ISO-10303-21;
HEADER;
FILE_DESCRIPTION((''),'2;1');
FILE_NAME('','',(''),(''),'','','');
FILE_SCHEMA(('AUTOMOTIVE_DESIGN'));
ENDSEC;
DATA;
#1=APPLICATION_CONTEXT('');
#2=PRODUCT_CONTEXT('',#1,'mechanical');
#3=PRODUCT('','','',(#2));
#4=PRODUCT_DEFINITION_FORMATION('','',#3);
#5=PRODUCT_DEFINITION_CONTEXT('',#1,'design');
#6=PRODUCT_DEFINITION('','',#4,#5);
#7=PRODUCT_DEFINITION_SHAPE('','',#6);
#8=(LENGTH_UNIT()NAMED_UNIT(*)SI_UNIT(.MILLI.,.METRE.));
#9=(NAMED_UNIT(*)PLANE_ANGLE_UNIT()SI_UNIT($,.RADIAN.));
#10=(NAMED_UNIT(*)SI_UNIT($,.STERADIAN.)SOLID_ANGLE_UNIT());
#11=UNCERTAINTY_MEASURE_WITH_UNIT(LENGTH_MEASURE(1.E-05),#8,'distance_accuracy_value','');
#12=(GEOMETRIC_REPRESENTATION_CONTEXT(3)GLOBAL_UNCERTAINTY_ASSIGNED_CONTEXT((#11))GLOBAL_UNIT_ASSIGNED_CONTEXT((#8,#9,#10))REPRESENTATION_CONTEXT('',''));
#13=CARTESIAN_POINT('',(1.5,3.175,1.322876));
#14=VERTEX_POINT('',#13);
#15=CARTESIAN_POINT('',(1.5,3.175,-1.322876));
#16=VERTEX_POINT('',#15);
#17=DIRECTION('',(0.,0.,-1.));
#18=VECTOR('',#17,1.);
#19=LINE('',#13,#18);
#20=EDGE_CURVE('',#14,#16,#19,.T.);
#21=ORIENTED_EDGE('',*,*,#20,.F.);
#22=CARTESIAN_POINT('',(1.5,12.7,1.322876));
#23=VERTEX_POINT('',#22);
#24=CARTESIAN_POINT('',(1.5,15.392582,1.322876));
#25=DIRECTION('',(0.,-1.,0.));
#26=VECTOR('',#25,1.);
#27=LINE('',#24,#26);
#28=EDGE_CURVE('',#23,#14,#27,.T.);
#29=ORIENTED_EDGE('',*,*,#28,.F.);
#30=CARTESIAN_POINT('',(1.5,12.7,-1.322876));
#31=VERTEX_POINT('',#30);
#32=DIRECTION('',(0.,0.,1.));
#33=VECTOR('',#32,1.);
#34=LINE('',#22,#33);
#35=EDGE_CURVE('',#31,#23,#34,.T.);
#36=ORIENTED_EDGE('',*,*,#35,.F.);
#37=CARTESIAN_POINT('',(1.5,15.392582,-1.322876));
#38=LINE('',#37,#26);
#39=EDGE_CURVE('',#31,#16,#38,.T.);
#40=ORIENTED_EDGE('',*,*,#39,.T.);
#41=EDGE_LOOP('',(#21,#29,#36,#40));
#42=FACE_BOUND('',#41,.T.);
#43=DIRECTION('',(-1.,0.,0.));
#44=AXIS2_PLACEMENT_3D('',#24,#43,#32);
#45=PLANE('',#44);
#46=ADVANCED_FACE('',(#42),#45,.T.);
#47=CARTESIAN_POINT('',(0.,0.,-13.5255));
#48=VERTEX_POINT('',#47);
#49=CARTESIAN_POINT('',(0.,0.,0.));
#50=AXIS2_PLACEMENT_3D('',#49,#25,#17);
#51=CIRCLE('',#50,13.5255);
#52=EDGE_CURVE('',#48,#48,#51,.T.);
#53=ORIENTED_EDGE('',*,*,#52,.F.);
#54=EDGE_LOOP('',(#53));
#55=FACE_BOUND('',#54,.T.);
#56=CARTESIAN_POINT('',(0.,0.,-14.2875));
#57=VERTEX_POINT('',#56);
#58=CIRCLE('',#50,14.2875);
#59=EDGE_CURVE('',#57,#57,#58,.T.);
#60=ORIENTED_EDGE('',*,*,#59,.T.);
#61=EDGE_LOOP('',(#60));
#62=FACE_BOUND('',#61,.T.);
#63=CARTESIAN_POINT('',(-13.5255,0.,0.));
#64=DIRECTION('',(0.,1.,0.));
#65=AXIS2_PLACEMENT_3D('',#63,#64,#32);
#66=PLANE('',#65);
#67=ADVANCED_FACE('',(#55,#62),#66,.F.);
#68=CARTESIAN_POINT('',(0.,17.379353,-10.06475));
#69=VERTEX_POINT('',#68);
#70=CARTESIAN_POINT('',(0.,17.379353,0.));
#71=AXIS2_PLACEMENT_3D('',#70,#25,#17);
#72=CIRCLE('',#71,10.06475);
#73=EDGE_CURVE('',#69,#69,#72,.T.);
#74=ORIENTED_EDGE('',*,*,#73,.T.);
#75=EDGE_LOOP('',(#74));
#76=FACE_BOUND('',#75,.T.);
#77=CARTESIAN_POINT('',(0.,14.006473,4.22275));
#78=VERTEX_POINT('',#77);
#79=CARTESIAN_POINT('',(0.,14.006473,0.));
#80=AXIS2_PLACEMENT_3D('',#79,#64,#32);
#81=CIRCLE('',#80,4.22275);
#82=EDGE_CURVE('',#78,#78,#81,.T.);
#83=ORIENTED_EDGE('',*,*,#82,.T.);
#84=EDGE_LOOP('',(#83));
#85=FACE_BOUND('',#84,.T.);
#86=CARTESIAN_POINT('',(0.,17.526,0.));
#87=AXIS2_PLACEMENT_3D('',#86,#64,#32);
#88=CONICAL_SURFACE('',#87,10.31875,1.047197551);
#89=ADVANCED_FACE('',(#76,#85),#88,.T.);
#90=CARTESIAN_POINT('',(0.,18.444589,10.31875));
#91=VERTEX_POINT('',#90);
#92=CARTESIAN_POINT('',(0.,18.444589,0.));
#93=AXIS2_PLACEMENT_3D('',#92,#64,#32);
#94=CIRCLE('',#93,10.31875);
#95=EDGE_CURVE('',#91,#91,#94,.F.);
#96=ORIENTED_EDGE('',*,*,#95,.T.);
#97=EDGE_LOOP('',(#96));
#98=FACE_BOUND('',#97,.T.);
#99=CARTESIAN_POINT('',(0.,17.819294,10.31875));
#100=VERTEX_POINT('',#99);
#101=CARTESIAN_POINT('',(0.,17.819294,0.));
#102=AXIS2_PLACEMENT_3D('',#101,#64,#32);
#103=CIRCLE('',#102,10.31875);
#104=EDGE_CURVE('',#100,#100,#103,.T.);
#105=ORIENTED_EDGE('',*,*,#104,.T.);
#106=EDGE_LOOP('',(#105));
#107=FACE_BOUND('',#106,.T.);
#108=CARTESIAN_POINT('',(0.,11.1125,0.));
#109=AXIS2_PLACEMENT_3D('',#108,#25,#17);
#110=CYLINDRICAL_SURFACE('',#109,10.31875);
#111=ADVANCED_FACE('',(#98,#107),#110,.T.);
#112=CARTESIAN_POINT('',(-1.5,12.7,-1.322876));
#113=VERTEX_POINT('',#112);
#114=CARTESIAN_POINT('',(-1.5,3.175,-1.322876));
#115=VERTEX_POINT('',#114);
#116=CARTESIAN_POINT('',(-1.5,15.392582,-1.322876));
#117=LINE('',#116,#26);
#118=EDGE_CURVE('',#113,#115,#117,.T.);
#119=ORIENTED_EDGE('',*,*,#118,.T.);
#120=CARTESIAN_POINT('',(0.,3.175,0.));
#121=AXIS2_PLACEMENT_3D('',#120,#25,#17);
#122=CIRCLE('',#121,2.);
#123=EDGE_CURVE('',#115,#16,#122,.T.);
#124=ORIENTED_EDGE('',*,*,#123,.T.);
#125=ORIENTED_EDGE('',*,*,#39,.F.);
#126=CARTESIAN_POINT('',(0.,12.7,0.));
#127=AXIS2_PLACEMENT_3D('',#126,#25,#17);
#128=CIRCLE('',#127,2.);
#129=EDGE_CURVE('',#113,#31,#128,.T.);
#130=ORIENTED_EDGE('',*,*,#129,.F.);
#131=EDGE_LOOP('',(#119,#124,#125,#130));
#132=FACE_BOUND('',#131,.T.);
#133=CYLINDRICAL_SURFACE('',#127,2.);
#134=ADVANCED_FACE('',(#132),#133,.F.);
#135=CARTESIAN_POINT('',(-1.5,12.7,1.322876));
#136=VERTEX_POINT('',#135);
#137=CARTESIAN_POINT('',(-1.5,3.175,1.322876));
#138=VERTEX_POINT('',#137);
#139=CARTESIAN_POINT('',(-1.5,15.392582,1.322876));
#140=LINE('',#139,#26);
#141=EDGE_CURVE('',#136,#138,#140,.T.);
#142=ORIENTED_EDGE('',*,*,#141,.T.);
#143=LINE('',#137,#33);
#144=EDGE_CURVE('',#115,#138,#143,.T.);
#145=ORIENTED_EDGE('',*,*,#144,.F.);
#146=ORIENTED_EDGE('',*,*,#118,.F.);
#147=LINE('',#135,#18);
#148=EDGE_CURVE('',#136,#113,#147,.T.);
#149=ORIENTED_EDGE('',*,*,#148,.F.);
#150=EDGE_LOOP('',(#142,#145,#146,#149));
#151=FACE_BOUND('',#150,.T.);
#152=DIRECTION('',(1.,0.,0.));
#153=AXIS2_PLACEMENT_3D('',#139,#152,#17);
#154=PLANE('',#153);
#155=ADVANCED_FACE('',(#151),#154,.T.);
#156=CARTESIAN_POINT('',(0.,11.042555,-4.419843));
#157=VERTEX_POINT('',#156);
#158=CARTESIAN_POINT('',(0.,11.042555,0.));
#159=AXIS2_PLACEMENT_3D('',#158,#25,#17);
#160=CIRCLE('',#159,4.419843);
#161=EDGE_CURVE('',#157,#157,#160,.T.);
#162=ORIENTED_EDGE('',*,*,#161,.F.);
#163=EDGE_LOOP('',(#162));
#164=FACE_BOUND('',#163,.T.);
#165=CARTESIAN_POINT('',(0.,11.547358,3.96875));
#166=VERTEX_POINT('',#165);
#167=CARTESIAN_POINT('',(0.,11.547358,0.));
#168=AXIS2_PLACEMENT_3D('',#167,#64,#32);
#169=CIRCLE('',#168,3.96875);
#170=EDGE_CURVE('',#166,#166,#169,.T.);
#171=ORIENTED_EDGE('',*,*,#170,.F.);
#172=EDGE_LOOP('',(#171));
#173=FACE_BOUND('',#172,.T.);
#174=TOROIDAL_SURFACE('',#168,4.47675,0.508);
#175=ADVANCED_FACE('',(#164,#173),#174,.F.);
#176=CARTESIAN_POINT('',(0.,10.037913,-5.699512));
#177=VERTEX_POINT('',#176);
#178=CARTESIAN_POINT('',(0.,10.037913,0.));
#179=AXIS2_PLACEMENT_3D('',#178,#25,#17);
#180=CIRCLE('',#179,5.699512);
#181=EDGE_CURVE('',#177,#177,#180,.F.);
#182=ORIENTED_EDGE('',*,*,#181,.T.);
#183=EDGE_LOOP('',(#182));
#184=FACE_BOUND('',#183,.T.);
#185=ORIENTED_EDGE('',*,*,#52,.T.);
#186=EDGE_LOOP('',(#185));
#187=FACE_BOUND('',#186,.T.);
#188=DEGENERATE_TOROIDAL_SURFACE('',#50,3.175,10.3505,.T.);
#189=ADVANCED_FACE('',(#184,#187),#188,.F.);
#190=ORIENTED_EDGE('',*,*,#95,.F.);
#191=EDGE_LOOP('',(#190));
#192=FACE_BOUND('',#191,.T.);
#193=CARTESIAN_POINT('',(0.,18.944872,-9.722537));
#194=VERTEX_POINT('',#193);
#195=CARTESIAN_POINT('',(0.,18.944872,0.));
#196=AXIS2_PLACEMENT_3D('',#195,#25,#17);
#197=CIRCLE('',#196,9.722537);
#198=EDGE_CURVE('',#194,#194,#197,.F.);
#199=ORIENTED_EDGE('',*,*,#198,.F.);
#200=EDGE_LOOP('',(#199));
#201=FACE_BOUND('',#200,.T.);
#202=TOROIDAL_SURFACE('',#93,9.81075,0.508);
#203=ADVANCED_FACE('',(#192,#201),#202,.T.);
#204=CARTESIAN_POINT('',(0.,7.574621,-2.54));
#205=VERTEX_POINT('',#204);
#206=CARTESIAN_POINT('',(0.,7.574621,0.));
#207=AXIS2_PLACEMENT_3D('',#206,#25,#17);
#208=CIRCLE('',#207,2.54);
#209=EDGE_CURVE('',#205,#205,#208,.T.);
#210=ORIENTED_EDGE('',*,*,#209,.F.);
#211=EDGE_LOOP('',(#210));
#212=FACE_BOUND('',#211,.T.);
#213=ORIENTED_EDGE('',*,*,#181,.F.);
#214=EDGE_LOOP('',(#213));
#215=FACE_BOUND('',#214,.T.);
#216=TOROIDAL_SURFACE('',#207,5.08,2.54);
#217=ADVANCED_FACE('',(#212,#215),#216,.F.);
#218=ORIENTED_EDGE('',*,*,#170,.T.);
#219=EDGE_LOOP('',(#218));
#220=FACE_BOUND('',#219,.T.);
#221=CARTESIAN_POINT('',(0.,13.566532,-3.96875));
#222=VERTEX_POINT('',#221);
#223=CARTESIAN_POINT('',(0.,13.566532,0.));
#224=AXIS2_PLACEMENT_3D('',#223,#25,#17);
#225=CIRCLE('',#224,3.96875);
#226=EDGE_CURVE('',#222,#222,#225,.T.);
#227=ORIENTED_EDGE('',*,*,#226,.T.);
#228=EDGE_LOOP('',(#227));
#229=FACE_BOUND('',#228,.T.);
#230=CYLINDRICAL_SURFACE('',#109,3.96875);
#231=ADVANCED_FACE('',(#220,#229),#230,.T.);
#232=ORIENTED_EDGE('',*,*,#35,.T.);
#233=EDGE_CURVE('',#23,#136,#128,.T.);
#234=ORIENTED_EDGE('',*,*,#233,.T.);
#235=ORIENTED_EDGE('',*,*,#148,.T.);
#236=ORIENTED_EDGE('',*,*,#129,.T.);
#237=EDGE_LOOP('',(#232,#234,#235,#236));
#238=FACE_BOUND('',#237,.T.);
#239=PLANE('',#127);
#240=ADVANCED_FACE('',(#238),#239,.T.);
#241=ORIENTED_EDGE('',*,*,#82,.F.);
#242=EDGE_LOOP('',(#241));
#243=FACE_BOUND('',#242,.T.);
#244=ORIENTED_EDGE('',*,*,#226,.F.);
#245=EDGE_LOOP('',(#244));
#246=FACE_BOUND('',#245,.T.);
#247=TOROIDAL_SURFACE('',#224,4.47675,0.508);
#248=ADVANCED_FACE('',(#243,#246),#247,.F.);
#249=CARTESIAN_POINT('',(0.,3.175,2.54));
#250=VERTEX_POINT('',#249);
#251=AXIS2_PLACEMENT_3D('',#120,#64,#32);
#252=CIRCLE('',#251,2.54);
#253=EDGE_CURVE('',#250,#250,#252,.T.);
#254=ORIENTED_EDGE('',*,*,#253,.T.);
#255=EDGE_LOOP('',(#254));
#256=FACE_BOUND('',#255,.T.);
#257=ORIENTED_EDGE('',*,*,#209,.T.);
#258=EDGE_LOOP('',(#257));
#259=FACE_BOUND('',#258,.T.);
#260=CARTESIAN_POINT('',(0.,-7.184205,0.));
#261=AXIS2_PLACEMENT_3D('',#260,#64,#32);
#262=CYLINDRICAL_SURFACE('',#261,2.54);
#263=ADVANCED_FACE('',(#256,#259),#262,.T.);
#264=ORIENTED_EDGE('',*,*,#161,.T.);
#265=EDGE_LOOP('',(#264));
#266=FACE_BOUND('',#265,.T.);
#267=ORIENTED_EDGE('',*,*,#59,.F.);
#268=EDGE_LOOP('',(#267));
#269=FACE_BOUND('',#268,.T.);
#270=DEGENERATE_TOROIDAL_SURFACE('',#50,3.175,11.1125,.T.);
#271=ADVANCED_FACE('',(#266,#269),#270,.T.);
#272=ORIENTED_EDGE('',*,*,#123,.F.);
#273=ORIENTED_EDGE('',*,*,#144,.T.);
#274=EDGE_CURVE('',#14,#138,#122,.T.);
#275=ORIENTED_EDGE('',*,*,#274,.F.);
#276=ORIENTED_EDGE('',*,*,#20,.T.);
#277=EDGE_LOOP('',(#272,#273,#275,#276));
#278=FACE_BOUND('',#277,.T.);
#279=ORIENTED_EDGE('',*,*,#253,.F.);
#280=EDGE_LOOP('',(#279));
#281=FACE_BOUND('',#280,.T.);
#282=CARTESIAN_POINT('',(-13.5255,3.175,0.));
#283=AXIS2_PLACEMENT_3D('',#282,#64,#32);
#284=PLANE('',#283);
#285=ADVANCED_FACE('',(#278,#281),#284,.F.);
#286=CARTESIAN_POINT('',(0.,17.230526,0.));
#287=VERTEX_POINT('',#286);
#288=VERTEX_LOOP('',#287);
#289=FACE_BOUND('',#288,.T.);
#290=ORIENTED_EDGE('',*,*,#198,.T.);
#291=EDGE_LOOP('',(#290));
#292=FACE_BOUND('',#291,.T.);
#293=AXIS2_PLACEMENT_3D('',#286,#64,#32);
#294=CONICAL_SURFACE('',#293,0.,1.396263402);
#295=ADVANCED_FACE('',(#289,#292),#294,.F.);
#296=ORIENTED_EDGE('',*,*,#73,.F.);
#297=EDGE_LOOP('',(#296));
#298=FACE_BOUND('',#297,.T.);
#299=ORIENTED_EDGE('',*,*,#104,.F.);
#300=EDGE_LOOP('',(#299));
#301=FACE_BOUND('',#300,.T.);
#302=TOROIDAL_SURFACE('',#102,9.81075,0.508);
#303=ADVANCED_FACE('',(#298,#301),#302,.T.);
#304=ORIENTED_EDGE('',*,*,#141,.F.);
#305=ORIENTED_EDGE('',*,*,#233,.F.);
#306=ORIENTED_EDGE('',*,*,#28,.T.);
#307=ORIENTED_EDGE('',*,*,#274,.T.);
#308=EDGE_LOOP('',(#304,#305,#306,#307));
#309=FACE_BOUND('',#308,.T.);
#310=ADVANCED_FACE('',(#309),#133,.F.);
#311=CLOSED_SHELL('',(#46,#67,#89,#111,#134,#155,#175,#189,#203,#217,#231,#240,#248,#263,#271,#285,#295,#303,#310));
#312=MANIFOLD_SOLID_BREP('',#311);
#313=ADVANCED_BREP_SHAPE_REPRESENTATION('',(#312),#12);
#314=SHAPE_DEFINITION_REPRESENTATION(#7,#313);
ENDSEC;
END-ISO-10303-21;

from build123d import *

# Parameters (mm, degrees)
SKETCH3_R           = 2.54
BOSS_EXTRUDE1_DEPTH = 7.1755
FILLET1_R           = 2.54
SKETCH5_R           = 2
CUT_EXTRUDE1_DEPTH  = 9.525
BOSS_EXTRUDE2_DEPTH = 9.525
FILLET2_R           = 0.508
FILLET3_R           = 0.508


with BuildPart() as part:
    # Sketch1 → Revolve1 (revolve)
    with BuildSketch(Plane.XY, mode=Mode.PRIVATE) as revolve1_sk:
        with BuildLine():
            Line((-3.175, 11.1125), (0, 11.1125))
            Line((0, 11.1125), (0, 10.3505))
            Line((0, 10.3505), (-3.175, 10.3505))
            ThreePointArc((-3.175, 10.3505), (-10.493908739, 7.318908739), (-13.5255, 0))
            Line((-13.5255, 0), (-14.2875, 0))
            ThreePointArc((-14.2875, 0), (-11.032724106, 7.857724106), (-3.175, 11.1125))
        make_face()
    revolve(revolve1_sk.sketch.rotate(Axis((0, 0, 0), (0, 1, 0)), 270), axis=Axis((0, 0, 0), (0, 1, 0)))

    # Sketch2 → Revolve2 (revolve)
    with BuildSketch(Plane.XY, mode=Mode.PRIVATE) as revolve2_sk:
        Polygon((0, 11.1125), (-3.96875, 10.973908196), (-3.96875, 13.859825791), (-10.31875, 17.526), (-10.31875, 19.05), (0, 17.230525968), align=None)
    revolve(revolve2_sk.sketch.rotate(Axis((0, 11.1125, 0), (0, 1, 0)), 270), axis=Axis((0, 11.1125, 0), (0, 1, 0)))

    # Sketch3 → Boss-Extrude1 (add)
    with BuildSketch(Plane.XZ.offset(-10.3505)):
        with Locations(Location((0, 0, 0), (0, 0, 90))):
            Circle(SKETCH3_R)
    extrude(amount=BOSS_EXTRUDE1_DEPTH)

    # Fillet1
    fillet1_edges = [part.edges().sort_by_distance(p)[0] for p in [
        (0, 10.3505, -2.54),
    ]]
    fillet(fillet1_edges, radius=FILLET1_R)

    # Sketch5 → Cut-Extrude1 (cut)
    with BuildSketch(Plane.XZ.offset(-3.175)):
        with Locations(Location((0, 0, 0), (0, 0, 270))):
            Circle(SKETCH5_R)
    extrude(amount=-CUT_EXTRUDE1_DEPTH, mode=Mode.SUBTRACT)

    # Sketch6 → Boss-Extrude2 (add)
    with BuildSketch(Plane.XZ.offset(-3.175)):
        with BuildLine():
            Line((-1.5, 1.322875656), (-1.5, -1.322875656))
            ThreePointArc((-1.5, -1.322875656), (-2, 0), (-1.5, 1.322875656))
        make_face()
        with BuildLine():
            Line((1.5, 1.322875656), (1.5, -1.322875656))
            ThreePointArc((1.5, -1.322875656), (2, 0), (1.5, 1.322875656))
        make_face()
    extrude(amount=-BOSS_EXTRUDE2_DEPTH)

    # Fillet2
    fillet2_edges = [part.edges().sort_by_distance(p)[0] for p in [
        (0, 13.859825791, 3.96875),
    ]]
    fillet(fillet2_edges, radius=FILLET2_R)

    # Fillet3
    fillet3_edges = [part.edges().sort_by_distance(p)[0] for p in [
        (0, 17.526, 10.31875),
        (0, 19.05, 10.31875),
    ]]
    fillet(fillet3_edges, radius=FILLET3_R)

    # Fillet5: read off the stored shape, not the designer's step
    # Fillet5 outline → Fillet5 (revolve)
    with BuildSketch(Plane.XY):
        with BuildLine():
            ThreePointArc((4.419842896, 11.042555067), (4.097954007, 11.20886446), (3.96875, 11.547357585))
            Line((3.96875, 11.547357585), (3.96875, 11.042555067))
            Line((3.96875, 11.042555067), (4.419842896, 11.042555067))
        make_face()
    revolve(axis=Axis((0, 0, 0), (0, 1, 0)))


solid = part.part
